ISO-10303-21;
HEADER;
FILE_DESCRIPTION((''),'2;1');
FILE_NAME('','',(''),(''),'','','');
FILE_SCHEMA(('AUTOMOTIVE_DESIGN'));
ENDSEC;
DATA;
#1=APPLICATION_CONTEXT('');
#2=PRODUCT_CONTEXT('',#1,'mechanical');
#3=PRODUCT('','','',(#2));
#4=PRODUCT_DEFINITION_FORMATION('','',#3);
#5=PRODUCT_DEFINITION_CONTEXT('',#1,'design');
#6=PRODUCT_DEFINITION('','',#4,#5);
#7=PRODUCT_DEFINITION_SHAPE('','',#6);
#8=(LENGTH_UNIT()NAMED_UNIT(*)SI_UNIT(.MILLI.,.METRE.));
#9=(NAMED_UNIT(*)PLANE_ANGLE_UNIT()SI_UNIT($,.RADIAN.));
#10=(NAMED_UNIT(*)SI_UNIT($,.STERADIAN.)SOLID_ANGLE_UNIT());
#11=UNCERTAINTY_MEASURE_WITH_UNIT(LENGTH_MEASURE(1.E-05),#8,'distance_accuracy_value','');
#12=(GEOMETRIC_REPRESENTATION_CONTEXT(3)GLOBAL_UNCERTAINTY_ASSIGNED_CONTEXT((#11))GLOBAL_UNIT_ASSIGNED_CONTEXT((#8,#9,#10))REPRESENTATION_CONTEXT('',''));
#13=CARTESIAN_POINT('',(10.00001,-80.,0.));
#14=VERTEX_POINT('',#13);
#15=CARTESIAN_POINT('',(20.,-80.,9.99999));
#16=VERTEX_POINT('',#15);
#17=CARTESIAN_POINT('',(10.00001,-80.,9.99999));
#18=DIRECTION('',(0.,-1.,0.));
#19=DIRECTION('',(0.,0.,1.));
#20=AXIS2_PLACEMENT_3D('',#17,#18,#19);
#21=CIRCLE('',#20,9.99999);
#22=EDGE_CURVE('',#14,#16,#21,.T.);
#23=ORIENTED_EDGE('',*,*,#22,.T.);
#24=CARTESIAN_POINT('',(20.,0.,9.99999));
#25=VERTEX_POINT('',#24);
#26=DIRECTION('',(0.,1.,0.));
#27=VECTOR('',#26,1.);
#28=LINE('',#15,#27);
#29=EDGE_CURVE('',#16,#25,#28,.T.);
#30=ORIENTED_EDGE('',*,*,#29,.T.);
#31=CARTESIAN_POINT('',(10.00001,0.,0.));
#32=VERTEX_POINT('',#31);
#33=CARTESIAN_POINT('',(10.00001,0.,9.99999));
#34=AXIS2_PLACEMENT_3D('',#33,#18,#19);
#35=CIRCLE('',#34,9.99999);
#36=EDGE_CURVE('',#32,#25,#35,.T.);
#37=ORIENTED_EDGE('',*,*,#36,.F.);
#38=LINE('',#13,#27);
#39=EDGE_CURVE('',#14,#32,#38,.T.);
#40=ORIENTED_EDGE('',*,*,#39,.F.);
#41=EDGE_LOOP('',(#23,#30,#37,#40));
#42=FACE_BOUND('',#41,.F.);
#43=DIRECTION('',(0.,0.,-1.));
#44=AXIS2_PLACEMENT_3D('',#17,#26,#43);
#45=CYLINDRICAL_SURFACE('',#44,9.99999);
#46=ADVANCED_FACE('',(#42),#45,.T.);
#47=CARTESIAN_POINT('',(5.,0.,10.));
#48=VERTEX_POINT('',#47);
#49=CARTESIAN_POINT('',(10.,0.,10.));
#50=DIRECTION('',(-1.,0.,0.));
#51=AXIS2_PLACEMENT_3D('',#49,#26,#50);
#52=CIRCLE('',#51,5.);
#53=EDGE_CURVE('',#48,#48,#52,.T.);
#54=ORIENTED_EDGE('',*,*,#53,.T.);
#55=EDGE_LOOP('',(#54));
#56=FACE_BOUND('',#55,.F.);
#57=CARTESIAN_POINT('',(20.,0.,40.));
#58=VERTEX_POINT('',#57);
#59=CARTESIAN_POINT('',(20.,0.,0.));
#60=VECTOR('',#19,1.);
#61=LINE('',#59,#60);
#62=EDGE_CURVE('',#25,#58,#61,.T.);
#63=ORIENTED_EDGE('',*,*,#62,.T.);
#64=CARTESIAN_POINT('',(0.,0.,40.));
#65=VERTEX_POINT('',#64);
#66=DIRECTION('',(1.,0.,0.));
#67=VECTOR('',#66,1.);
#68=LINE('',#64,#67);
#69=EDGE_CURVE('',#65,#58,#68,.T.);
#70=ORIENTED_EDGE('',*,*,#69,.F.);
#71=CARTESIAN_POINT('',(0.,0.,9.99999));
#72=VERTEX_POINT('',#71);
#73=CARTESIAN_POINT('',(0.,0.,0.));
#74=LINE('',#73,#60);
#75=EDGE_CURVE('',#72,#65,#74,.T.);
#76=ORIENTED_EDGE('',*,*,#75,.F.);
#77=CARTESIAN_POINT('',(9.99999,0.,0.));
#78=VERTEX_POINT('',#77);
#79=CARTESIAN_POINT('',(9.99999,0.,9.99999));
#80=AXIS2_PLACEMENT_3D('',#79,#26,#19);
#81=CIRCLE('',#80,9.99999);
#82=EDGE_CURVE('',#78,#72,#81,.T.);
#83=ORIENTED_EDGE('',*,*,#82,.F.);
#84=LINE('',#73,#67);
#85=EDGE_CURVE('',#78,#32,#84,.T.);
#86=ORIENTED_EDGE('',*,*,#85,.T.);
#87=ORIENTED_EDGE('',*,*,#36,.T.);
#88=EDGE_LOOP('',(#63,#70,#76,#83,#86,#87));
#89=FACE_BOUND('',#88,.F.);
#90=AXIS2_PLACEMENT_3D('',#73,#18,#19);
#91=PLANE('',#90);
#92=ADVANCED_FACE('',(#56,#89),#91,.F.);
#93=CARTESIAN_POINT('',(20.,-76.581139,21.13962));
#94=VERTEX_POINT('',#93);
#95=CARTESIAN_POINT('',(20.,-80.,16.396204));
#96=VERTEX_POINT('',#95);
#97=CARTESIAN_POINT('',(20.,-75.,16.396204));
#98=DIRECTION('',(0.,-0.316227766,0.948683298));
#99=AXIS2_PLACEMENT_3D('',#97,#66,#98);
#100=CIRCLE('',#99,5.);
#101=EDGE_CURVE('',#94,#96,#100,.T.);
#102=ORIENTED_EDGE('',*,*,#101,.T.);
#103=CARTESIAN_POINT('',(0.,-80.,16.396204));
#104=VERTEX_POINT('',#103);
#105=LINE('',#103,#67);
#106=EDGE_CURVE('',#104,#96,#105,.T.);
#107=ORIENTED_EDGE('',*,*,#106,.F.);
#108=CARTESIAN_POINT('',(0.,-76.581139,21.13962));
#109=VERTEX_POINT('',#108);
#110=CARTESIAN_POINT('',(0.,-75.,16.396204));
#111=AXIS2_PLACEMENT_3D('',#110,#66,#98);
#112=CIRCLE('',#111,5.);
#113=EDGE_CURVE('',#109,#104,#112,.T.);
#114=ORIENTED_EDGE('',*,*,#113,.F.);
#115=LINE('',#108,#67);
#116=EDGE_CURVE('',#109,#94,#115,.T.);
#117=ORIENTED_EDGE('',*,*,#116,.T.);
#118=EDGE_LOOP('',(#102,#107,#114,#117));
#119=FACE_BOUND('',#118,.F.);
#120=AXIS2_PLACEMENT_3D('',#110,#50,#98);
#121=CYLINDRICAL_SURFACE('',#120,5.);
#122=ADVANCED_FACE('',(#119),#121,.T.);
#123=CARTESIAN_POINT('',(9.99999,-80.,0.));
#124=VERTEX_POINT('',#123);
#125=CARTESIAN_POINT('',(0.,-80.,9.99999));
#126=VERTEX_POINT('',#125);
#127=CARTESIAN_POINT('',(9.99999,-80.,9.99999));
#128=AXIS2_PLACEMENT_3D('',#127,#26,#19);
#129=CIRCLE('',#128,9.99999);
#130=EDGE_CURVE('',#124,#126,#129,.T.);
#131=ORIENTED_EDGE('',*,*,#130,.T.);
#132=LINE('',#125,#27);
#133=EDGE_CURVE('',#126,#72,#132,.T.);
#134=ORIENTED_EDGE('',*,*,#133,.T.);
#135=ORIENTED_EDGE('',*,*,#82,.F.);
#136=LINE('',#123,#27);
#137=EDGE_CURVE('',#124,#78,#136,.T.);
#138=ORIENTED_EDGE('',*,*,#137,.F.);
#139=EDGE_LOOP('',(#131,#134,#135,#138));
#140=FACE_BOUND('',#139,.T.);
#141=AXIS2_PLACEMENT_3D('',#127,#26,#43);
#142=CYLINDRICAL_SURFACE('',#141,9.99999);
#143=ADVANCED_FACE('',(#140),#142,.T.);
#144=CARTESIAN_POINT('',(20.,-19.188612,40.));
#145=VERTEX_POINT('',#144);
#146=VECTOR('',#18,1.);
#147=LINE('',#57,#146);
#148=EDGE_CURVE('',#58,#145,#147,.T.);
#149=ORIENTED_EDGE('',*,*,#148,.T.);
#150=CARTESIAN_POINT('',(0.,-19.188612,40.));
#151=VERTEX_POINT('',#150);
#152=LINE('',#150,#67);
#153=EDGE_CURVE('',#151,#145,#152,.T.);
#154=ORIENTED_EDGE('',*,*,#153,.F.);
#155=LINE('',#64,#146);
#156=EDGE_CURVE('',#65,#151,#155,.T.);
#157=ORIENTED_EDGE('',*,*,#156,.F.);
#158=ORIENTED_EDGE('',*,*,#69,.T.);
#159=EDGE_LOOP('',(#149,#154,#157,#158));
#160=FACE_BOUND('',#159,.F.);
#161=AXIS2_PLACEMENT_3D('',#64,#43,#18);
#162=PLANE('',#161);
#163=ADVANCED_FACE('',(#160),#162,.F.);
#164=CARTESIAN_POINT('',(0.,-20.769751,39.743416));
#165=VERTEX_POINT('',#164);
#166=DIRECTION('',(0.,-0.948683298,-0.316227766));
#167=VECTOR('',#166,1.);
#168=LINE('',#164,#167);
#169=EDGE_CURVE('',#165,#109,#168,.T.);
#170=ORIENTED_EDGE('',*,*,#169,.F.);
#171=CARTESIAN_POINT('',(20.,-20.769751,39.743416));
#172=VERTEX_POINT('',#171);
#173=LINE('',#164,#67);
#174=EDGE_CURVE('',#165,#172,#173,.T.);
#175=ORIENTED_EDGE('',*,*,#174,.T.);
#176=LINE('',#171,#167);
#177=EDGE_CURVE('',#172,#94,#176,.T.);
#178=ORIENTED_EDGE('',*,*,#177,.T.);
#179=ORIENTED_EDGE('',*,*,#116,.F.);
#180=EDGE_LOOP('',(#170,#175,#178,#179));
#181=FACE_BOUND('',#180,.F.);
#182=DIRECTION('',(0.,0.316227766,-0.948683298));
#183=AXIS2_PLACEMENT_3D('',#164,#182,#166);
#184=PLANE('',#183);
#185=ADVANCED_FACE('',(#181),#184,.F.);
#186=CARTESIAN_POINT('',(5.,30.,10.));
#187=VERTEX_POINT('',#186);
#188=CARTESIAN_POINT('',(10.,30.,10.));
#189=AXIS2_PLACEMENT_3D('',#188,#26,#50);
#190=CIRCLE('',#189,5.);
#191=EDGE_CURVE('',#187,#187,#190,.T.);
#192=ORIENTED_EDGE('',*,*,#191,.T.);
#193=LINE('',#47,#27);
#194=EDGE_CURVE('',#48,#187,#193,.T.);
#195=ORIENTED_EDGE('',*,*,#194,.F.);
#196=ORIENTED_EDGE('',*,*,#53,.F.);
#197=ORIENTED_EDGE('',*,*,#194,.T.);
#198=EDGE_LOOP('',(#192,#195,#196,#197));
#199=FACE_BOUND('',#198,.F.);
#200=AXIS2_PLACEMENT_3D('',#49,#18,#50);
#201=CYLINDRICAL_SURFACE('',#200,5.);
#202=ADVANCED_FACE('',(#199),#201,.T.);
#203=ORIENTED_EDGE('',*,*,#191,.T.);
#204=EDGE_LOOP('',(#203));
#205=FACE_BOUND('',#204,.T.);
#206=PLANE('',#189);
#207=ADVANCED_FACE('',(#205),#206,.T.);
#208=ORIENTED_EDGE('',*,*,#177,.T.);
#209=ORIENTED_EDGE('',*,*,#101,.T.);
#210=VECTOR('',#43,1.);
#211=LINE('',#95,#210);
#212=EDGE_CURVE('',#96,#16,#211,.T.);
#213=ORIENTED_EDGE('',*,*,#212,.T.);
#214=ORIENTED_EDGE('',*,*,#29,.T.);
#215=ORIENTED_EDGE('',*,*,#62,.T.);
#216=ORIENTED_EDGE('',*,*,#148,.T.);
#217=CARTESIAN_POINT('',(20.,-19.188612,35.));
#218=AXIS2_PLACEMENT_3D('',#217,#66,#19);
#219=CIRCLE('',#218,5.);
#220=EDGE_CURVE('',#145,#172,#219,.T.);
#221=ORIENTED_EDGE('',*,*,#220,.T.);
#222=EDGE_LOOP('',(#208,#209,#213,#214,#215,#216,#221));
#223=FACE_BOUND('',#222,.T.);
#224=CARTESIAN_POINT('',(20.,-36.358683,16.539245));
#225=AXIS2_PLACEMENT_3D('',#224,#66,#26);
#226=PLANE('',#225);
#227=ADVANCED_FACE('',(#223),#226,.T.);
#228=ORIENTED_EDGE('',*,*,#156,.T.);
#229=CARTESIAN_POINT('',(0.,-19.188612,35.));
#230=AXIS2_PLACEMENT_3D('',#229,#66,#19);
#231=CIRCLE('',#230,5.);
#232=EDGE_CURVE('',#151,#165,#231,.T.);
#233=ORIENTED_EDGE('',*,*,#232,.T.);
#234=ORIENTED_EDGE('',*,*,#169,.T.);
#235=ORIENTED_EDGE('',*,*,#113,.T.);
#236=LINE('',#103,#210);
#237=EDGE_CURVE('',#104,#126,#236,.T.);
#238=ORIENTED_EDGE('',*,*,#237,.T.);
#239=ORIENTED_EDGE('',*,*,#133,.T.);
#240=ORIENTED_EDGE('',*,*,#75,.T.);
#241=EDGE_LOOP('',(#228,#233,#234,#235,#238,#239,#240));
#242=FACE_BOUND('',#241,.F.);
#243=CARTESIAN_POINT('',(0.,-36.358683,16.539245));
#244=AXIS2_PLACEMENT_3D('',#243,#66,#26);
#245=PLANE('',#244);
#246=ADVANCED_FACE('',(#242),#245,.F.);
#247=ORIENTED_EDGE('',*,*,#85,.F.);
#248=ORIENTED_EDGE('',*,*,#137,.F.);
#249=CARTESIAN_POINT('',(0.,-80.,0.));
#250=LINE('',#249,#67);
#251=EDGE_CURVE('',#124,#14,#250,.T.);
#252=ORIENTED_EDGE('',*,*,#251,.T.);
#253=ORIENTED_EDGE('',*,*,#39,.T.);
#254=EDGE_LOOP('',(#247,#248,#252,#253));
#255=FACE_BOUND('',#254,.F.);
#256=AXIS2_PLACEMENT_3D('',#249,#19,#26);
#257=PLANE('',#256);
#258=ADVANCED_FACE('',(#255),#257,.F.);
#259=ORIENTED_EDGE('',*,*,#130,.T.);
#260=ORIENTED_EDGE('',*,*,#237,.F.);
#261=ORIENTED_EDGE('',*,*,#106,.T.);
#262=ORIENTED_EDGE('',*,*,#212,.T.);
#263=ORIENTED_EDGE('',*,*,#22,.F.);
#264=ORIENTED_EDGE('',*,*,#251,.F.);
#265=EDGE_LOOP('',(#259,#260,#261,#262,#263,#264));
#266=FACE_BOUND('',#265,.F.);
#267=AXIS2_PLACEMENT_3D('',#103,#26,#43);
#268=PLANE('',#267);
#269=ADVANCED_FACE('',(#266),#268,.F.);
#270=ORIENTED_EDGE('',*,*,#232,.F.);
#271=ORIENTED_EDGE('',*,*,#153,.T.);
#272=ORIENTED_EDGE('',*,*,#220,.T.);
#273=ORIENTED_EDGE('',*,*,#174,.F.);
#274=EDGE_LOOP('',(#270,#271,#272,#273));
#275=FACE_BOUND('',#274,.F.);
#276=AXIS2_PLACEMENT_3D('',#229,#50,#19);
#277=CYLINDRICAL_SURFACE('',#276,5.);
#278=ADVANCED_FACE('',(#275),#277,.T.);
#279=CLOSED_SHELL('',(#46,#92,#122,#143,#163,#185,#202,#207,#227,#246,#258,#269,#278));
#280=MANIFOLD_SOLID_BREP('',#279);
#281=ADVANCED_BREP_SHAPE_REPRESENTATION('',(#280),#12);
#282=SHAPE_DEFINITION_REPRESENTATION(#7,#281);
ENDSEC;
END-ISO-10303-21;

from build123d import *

# Parameters (mm, degrees)
F1_DEPTH = 20
F2_R     = 9.99999
F3_R     = 5
F4_DEPTH = 30


# Not quite as in the source:
# - a fillet or chamfer is up to 0.001 mm smaller than in the source, because OpenCascade refuses the exact size


with BuildPart() as f1:
    # F0 (on Right) → F1 (new body)
    with BuildSketch(Plane.YZ):
        with BuildLine():
            Line((-80, 0), (0, 0))
            Line((0, 0), (0, 40))
            Line((0, 40), (-19.1886116992, 40))
            ThreePointArc((-19.1886116992, 40), (-19.9895229142, 39.9354372882), (-20.7697505292, 39.7434164903))
            Line((-20.7697505292, 39.7434164903), (-76.5811388301, 21.13962039))
            ThreePointArc((-76.5811388301, 21.13962039), (-79.0562109259, 19.319755323), (-80, 16.3962038997))
            Line((-80, 16.3962038997), (-80, 0))
        make_face()
    extrude(amount=F1_DEPTH)

    # F2 (radius 10 in the source; OpenCascade refuses exactly that, so slightly less here)
    f2_edges = [f1.edges().sort_by_distance(p)[0] for p in [
        (20, -40, 0),
        (0, -40, 0),
    ]]
    fillet(f2_edges, radius=F2_R)

    # F3 (on face) → F4 (join)
    with BuildSketch(Plane(origin=(0, 0, 0), x_dir=(-1, 0, 0), z_dir=(0, 1, 0))):
        with Locations((-10, 10)):
            Circle(F3_R)
    extrude(amount=F4_DEPTH)


solid = f1.part
